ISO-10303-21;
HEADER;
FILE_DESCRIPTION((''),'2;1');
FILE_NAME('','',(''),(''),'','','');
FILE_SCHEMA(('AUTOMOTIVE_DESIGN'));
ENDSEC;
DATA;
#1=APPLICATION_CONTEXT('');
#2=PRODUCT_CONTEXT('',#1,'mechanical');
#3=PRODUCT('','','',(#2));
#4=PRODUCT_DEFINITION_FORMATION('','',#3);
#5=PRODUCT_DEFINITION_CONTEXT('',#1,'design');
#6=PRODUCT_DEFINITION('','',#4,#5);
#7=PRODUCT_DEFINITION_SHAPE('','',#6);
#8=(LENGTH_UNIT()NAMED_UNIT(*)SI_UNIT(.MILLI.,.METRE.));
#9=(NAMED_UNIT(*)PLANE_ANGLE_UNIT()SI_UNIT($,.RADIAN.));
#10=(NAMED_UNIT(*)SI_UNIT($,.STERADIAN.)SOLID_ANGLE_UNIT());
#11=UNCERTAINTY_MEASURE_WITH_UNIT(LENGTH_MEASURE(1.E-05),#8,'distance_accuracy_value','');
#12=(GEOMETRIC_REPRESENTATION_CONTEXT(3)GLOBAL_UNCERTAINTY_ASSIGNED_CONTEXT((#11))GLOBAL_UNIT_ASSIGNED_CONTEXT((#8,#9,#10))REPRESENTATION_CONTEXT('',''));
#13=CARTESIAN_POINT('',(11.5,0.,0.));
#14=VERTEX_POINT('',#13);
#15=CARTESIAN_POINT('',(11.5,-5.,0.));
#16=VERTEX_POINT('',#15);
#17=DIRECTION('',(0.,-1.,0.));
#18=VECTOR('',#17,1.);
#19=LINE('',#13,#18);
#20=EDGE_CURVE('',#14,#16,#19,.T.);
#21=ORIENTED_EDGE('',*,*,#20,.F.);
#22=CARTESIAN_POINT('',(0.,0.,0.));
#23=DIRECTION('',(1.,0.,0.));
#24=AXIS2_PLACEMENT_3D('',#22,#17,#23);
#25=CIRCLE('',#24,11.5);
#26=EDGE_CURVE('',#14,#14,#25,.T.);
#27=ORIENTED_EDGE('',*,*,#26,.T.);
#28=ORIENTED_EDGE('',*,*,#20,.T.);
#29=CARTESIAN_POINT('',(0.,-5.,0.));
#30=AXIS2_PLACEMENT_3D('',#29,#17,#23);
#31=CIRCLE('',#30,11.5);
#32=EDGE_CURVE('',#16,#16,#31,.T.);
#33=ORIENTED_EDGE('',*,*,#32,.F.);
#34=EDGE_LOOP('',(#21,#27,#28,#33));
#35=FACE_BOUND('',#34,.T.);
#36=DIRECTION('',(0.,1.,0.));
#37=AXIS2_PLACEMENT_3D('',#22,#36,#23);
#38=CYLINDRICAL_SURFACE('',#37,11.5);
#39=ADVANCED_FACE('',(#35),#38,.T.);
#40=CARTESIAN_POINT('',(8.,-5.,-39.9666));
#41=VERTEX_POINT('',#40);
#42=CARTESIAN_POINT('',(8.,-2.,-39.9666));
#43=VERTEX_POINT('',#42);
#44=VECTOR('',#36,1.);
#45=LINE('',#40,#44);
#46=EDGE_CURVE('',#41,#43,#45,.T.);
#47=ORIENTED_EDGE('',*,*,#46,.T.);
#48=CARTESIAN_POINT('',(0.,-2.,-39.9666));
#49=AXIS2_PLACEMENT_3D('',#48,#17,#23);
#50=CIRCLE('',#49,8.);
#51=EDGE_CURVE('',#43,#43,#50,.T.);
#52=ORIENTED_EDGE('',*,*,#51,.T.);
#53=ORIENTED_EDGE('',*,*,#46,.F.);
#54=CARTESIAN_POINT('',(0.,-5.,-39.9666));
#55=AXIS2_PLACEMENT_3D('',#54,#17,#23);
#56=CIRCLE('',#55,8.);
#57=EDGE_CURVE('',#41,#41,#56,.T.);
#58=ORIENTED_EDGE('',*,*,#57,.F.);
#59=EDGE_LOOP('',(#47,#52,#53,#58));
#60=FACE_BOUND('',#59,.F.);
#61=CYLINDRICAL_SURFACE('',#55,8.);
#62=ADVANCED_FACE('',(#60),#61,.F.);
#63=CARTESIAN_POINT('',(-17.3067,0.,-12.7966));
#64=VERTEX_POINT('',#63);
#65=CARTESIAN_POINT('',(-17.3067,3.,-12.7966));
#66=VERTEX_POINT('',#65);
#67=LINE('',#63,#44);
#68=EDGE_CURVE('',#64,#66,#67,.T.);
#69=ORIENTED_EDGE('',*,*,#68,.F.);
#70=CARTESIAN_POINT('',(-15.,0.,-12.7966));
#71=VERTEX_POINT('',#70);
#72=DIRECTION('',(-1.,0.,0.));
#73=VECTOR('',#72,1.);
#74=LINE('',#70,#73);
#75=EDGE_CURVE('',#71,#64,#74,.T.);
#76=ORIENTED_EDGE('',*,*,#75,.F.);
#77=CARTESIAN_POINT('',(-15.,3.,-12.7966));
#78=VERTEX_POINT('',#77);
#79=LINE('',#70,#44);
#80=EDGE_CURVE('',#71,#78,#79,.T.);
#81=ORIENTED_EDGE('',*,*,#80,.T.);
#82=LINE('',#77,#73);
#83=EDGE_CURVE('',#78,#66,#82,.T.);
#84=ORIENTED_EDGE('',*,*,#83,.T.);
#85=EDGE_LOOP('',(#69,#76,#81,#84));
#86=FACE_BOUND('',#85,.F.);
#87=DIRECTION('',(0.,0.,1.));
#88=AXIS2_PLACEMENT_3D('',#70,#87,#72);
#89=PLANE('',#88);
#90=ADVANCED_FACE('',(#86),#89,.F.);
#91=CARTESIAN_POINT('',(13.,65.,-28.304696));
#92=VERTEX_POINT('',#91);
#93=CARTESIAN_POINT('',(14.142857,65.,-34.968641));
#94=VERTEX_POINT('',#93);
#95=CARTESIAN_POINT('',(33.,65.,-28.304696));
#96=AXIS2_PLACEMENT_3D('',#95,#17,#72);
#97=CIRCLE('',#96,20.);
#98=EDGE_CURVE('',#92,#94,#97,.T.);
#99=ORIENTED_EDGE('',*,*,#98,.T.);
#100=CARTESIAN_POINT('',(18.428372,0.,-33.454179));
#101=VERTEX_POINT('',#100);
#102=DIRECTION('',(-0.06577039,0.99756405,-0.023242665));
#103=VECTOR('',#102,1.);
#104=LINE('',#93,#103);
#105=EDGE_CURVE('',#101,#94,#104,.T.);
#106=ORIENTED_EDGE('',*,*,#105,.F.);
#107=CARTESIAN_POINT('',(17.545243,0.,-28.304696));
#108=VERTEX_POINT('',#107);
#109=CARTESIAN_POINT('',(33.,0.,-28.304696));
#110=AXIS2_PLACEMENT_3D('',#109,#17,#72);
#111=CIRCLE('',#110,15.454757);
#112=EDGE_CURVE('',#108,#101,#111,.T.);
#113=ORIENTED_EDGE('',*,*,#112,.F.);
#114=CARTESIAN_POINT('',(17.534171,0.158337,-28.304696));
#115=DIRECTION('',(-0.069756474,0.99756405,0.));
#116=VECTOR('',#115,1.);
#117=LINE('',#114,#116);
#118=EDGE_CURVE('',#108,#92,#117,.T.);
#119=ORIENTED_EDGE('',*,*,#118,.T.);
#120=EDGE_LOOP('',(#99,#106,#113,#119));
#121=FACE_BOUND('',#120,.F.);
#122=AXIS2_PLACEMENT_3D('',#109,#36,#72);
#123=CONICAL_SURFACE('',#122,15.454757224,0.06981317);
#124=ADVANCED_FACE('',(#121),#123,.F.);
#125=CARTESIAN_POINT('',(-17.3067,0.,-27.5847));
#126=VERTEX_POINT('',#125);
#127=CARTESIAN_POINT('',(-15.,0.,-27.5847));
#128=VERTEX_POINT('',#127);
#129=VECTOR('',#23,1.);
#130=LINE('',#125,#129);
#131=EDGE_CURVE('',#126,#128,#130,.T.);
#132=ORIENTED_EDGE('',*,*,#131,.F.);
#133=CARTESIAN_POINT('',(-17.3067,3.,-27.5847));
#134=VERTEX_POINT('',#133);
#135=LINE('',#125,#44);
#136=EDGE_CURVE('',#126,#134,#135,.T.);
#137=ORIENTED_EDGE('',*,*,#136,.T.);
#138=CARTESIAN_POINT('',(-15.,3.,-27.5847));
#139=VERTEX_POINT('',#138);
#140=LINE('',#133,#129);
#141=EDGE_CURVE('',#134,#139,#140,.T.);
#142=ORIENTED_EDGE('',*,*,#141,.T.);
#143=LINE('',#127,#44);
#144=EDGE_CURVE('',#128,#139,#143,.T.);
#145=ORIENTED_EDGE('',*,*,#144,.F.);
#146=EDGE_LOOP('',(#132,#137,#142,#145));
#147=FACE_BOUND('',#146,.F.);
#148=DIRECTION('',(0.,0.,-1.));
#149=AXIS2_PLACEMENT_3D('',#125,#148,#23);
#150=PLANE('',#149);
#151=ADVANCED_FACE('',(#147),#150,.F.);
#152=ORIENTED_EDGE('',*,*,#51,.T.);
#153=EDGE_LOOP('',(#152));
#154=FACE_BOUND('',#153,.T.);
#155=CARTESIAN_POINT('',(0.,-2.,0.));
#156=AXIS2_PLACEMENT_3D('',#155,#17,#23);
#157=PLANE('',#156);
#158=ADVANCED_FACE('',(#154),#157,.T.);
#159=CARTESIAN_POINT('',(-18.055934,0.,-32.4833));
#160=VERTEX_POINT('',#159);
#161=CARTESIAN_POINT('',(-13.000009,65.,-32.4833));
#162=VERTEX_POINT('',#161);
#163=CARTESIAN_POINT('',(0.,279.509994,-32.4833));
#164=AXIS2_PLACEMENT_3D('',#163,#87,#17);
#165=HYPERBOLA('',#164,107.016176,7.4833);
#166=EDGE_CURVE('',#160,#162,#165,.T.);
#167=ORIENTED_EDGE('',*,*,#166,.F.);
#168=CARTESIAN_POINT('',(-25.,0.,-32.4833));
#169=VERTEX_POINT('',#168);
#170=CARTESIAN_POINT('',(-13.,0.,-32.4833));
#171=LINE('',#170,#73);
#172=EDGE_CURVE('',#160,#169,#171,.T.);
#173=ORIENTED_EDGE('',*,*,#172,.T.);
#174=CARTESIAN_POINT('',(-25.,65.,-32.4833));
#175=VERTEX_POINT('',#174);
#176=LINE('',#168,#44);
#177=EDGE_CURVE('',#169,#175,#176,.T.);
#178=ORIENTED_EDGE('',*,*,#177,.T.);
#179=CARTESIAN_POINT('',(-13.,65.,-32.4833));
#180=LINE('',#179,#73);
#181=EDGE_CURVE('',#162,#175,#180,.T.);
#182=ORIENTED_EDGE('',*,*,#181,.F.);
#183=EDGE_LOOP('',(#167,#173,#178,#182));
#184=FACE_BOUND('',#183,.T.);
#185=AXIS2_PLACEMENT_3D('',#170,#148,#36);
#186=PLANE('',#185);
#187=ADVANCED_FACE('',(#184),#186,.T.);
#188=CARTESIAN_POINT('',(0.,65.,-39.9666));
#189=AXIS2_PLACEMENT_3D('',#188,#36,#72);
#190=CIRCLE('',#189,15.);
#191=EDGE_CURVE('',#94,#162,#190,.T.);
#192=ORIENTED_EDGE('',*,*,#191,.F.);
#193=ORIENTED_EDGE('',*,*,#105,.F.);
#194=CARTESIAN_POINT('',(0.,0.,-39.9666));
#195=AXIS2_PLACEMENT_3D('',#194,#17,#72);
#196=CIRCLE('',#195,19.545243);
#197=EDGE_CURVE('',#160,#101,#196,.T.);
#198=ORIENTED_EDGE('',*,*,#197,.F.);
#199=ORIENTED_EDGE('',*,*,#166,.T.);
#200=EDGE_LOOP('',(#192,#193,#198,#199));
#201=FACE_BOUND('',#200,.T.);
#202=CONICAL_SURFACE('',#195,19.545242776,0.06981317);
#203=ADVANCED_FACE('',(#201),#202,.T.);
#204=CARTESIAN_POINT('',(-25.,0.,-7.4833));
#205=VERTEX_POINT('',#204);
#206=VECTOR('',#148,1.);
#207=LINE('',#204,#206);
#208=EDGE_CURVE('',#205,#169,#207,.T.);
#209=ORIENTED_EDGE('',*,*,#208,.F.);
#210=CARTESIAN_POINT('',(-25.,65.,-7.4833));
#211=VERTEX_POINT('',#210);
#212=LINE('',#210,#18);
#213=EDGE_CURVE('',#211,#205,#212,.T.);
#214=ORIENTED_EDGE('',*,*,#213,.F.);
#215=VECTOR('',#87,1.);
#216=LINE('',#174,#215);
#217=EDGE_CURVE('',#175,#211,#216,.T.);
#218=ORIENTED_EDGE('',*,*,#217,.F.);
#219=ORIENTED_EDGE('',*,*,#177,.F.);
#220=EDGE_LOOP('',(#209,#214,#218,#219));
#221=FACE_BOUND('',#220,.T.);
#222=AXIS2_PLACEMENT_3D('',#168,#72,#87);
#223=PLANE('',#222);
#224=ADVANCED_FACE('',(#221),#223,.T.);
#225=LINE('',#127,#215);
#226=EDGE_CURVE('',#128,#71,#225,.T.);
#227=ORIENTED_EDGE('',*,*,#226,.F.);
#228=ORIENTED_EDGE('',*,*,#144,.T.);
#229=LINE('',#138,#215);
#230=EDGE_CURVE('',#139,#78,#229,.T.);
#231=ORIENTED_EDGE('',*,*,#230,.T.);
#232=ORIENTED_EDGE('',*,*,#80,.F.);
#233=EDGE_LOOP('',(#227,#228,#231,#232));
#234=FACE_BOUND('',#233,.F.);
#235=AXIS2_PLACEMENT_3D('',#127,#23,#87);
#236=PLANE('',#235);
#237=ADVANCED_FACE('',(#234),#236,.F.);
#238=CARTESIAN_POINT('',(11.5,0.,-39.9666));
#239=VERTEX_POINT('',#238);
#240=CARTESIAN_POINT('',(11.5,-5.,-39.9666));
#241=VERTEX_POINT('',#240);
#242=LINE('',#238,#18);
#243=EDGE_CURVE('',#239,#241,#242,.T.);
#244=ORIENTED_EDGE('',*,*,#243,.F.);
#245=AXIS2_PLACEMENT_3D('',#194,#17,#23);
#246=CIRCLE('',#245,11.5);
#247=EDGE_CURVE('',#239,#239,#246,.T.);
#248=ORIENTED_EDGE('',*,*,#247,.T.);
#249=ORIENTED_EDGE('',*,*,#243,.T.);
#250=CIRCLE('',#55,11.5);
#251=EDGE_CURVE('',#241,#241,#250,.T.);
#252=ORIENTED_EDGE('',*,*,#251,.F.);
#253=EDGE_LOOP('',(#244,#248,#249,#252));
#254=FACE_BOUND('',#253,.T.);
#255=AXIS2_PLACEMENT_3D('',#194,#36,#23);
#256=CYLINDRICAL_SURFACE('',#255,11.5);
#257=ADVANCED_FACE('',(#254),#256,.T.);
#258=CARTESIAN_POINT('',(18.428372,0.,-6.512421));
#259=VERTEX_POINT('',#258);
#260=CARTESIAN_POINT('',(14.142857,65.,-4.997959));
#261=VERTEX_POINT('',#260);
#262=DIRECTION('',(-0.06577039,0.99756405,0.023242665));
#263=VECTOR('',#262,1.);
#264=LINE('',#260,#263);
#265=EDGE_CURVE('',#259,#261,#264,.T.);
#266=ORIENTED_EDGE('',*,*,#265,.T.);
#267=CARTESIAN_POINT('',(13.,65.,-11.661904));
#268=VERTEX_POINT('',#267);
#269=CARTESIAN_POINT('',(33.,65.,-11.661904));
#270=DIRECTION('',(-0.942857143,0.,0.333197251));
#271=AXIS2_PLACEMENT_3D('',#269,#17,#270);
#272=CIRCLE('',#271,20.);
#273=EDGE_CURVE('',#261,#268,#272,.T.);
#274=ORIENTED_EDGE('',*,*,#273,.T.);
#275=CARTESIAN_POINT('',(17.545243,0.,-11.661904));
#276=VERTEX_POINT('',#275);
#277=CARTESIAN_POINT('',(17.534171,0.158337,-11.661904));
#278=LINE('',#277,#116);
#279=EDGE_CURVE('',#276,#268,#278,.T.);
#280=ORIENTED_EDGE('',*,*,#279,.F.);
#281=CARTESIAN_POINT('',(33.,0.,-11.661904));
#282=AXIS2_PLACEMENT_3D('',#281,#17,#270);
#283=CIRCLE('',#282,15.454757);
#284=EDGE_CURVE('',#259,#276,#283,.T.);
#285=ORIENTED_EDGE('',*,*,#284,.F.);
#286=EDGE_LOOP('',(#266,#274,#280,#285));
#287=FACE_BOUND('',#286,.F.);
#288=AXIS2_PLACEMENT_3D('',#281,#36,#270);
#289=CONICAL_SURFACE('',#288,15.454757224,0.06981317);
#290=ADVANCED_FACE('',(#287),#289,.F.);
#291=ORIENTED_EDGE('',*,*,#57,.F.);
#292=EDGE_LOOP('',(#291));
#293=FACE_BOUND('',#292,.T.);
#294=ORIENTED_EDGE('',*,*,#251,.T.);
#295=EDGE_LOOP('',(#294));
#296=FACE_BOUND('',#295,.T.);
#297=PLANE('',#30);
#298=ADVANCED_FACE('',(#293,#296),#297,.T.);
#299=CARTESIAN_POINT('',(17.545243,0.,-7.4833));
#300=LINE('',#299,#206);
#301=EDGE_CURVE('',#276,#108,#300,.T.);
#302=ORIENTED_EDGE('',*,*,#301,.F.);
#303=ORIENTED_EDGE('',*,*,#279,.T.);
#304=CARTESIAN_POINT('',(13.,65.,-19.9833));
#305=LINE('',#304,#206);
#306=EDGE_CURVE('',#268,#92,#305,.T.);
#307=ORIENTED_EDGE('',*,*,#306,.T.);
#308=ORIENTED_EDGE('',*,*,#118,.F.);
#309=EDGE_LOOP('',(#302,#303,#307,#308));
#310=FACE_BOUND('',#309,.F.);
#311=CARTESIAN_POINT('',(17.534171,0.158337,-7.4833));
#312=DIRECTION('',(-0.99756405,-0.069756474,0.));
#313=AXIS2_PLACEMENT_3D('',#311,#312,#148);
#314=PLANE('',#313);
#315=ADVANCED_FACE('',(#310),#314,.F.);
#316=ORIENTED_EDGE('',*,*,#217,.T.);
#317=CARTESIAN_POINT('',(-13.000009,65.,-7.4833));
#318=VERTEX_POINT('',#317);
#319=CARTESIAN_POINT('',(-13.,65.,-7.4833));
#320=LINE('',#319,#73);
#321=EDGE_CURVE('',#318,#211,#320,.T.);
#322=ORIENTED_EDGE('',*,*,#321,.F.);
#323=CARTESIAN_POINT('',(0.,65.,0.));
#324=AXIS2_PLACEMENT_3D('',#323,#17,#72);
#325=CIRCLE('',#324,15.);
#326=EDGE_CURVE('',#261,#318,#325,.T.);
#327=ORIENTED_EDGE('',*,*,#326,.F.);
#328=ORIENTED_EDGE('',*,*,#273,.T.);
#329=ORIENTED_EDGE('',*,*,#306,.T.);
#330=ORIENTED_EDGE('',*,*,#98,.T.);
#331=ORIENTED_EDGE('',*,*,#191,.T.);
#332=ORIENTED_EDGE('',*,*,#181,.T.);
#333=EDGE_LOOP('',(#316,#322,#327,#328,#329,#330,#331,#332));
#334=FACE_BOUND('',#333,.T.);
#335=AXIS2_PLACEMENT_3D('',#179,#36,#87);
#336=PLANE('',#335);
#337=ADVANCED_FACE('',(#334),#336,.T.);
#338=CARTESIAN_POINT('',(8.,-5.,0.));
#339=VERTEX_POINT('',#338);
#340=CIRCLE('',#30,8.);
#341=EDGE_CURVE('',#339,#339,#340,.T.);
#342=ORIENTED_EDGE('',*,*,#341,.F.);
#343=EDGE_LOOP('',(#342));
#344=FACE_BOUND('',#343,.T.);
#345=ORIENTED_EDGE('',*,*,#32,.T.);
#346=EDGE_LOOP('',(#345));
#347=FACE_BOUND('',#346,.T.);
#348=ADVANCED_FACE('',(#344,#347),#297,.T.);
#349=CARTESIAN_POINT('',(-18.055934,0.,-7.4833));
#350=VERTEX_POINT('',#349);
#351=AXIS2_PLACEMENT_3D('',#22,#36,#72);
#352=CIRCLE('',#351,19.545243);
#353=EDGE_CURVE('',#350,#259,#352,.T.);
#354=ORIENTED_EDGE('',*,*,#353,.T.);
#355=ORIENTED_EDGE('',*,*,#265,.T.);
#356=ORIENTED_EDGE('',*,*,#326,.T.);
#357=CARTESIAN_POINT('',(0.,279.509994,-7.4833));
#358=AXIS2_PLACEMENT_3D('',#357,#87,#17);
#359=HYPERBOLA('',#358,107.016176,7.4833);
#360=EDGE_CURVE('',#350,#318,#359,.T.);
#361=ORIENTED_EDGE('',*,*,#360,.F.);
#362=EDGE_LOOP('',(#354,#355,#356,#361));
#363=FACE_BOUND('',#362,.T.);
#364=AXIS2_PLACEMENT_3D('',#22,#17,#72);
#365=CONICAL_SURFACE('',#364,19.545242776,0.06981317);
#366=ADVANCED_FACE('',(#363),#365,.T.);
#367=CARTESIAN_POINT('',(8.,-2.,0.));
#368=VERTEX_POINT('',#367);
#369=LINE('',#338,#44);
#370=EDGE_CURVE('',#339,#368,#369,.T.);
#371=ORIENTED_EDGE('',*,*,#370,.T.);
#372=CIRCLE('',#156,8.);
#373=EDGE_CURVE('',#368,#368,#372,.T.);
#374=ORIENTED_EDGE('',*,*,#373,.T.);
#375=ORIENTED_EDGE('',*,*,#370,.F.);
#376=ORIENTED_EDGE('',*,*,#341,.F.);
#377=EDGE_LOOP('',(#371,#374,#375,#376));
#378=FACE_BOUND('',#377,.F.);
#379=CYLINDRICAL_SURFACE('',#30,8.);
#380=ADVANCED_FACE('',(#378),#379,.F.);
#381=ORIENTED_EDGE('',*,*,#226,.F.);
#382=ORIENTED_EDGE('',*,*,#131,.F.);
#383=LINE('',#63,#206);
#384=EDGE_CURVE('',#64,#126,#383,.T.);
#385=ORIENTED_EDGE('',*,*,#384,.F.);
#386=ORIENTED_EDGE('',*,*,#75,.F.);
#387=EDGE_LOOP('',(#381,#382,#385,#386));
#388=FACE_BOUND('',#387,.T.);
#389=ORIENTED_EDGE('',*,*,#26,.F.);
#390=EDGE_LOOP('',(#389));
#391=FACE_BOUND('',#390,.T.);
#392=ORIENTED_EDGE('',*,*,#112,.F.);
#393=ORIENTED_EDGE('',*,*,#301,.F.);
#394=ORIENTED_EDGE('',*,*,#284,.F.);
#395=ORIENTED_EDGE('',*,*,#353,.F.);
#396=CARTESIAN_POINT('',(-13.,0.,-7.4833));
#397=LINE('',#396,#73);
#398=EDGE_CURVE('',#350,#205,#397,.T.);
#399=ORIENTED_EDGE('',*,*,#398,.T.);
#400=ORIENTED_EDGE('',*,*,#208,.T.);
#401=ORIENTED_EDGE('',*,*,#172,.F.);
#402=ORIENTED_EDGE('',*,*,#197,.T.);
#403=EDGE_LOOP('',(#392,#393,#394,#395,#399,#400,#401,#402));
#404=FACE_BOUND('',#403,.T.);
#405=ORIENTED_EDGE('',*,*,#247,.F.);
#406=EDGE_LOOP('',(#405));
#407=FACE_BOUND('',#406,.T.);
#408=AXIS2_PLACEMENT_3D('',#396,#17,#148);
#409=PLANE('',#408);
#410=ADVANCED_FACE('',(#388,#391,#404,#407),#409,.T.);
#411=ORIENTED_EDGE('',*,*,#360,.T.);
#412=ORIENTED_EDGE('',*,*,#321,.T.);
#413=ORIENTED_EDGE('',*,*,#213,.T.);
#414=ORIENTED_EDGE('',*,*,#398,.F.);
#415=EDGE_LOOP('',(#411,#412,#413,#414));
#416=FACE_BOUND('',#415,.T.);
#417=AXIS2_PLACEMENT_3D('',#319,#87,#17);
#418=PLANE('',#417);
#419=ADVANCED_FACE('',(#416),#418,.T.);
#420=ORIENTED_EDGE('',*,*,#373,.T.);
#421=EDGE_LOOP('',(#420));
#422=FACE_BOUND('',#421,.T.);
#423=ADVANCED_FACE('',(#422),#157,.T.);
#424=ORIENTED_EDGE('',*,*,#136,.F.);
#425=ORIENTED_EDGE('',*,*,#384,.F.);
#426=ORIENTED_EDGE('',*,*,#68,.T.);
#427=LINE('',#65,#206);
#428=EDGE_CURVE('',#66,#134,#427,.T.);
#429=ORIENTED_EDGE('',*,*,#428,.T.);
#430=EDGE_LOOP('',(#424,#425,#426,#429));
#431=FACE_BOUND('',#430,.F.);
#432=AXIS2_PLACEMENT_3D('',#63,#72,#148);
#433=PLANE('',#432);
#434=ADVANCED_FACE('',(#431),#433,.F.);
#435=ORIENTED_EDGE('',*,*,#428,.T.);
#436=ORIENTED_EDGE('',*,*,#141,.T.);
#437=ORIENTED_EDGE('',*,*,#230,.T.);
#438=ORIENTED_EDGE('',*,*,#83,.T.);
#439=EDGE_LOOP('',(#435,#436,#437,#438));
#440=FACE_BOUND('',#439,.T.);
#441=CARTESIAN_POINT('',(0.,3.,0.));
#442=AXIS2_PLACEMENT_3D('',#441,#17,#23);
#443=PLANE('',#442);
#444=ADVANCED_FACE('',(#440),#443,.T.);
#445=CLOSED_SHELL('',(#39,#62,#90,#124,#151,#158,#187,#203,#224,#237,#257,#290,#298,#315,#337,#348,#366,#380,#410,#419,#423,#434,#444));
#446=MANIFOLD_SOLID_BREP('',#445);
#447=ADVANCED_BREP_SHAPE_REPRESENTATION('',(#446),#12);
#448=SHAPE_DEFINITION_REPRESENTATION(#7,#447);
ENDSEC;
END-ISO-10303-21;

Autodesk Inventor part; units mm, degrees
ref_plane "YZ Plane" through (0, 0, 0) normal (1, 0, 0) x (0, 1, 0)
ref_plane "XZ Plane" through (0, 0, 0) normal (0, 1, 0) x (-1, 0, 0)
ref_plane "XY Plane" through (0, 0, 0) normal (0, 0, 1) x (1, 0, 0)
sketch "Esquisse7" plane through (0, 0, 0) normal (0, 1, 0) x (-1, 0, 0)
  circle A0 centre (0, 0) radius 15
  circle A1 centre (0, -39.9666) radius 15
  line L0 (13, -7.4833) -> (-13, -7.4833)
  line L1 (-13, -7.4833) -> (-13, -32.4833)
  line L2 (-13, -32.4833) -> (13, -32.4833)
  line L3 (13, -32.4833) -> (13, -7.4833)
  dimension "d39" = 30
  dimension "d40" = 25
  dimension "d41" = 26
extrude "Extrusion7" add sketch "Esquisse7" along normal blind 65
sketch "Esquisse8" plane through (-13, 0, -32.4833) normal (-1, 0, 0) x (0, 0, 1)
  line L0 (0, 0) -> (25, 0) construction
  line L1 (25, 0) -> (25, 65) construction
  line L2 (0, 65) -> (25, 65) construction
  line L3 (0, 0) -> (0, 65) construction
  line L4 (25, 0) -> (0, 0)
  line L5 (0, 0) -> (0, 65)
  line L6 (0, 65) -> (25, 65)
  line L7 (25, 65) -> (25, 0)
  point P0 (32.4833, 0)
extrude "Extrusion8" add sketch "Esquisse8" along normal blind 12
sketch "Esquisse9" plane through (0, 0, 0) normal (0, -1, 0) x (1, 0, 0)
  arc A0 (-13, -32.4833) -> (13, -32.4833) centre (0, -39.9666) ccw construction
  line L0 (13, -7.4833) -> (13, -32.4833) construction
  arc A1 (13, -7.4833) -> (-13, -7.4833) centre (0, 0) ccw construction
  line L1 (-13, -7.4833) -> (-25, -7.4833) construction
  line L2 (-25, -32.4833) -> (-25, -7.4833) construction
  line L3 (-13, -32.4833) -> (-25, -32.4833) construction
  line L4 (-13, -7.4833) -> (-25, -7.4833) construction
  line L5 (-15, -7.4833) -> (-15, -32.4833) construction
  line L6 (-13, -32.4833) -> (-25, -32.4833) construction
  line L7 (-15, -12.7966) -> (-17.3067, -12.7966)
  line L8 (-17.3067, -12.7966) -> (-17.3067, -27.5847)
  line L9 (-17.3067, -27.5847) -> (-15, -27.5847)
  line L10 (-15, -27.5847) -> (-15, -12.7966)
  point P0 (-15, -29.9833)
  dimension "d47" = 10
extrude "Extrusion9" cut sketch "Esquisse9" against normal blind 3
sketch "Esquisse10" plane through (0, 0, 0) normal (0, -1, 0) x (1, 0, 0)
  arc A0 (-13, -32.4833) -> (13, -32.4833) centre (0, -39.9666) ccw construction
  line L0 (13, -7.4833) -> (13, -32.4833) construction
  arc A1 (13, -7.4833) -> (-13, -7.4833) centre (0, 0) ccw construction
  line L1 (-13, -7.4833) -> (-25, -7.4833) construction
  line L2 (-25, -32.4833) -> (-25, -7.4833) construction
  line L3 (-13, -32.4833) -> (-25, -32.4833) construction
  circle A2 centre (0, 0) radius 11.5
  circle A3 centre (0, -39.9666) radius 11.5
  arc A4 (-13, -32.4833) -> (13, -32.4833) centre (0, -39.9666) ccw projected
  dimension "d58" = 23
extrude "Extrusion10" add sketch "Esquisse10" along normal blind 5
sketch "Esquisse11" plane through (0, -5, 0) normal (0, -1, 0) x (1, 0, 0)
  circle A0 centre (0, -39.9666) radius 11.5 construction
  circle A1 centre (0, 0) radius 11.5 construction
  circle A2 centre (0, 0) radius 8
  circle A3 centre (0, -39.9666) radius 8
  dimension "d54" = 16
extrude "Extrusion11" cut sketch "Esquisse11" against normal blind 3
fillet "Congé6" radius 20 2 edges at (13, 32.5, -7.4833) (13, 32.5, -32.4833)
draft "Dépouille de face1" angle 4 pull direction (0, 1, 0) faces at (13, 21.6667, -17.2095) (13.057, 21.6667, -29.813) (13.2275, 21.6667, -8.6539) (-14.4854, 43.3333, -43.862) (-14.0102, 43.3333, -5.3586) fixed edges at (13, 65, -19.9833) (13.2878, 65, -31.6853) (13.2878, 65, -8.2813) (-1.3678, 65, -54.9041) (-1.3678, 65, 14.9375)
properties part number "head1"
